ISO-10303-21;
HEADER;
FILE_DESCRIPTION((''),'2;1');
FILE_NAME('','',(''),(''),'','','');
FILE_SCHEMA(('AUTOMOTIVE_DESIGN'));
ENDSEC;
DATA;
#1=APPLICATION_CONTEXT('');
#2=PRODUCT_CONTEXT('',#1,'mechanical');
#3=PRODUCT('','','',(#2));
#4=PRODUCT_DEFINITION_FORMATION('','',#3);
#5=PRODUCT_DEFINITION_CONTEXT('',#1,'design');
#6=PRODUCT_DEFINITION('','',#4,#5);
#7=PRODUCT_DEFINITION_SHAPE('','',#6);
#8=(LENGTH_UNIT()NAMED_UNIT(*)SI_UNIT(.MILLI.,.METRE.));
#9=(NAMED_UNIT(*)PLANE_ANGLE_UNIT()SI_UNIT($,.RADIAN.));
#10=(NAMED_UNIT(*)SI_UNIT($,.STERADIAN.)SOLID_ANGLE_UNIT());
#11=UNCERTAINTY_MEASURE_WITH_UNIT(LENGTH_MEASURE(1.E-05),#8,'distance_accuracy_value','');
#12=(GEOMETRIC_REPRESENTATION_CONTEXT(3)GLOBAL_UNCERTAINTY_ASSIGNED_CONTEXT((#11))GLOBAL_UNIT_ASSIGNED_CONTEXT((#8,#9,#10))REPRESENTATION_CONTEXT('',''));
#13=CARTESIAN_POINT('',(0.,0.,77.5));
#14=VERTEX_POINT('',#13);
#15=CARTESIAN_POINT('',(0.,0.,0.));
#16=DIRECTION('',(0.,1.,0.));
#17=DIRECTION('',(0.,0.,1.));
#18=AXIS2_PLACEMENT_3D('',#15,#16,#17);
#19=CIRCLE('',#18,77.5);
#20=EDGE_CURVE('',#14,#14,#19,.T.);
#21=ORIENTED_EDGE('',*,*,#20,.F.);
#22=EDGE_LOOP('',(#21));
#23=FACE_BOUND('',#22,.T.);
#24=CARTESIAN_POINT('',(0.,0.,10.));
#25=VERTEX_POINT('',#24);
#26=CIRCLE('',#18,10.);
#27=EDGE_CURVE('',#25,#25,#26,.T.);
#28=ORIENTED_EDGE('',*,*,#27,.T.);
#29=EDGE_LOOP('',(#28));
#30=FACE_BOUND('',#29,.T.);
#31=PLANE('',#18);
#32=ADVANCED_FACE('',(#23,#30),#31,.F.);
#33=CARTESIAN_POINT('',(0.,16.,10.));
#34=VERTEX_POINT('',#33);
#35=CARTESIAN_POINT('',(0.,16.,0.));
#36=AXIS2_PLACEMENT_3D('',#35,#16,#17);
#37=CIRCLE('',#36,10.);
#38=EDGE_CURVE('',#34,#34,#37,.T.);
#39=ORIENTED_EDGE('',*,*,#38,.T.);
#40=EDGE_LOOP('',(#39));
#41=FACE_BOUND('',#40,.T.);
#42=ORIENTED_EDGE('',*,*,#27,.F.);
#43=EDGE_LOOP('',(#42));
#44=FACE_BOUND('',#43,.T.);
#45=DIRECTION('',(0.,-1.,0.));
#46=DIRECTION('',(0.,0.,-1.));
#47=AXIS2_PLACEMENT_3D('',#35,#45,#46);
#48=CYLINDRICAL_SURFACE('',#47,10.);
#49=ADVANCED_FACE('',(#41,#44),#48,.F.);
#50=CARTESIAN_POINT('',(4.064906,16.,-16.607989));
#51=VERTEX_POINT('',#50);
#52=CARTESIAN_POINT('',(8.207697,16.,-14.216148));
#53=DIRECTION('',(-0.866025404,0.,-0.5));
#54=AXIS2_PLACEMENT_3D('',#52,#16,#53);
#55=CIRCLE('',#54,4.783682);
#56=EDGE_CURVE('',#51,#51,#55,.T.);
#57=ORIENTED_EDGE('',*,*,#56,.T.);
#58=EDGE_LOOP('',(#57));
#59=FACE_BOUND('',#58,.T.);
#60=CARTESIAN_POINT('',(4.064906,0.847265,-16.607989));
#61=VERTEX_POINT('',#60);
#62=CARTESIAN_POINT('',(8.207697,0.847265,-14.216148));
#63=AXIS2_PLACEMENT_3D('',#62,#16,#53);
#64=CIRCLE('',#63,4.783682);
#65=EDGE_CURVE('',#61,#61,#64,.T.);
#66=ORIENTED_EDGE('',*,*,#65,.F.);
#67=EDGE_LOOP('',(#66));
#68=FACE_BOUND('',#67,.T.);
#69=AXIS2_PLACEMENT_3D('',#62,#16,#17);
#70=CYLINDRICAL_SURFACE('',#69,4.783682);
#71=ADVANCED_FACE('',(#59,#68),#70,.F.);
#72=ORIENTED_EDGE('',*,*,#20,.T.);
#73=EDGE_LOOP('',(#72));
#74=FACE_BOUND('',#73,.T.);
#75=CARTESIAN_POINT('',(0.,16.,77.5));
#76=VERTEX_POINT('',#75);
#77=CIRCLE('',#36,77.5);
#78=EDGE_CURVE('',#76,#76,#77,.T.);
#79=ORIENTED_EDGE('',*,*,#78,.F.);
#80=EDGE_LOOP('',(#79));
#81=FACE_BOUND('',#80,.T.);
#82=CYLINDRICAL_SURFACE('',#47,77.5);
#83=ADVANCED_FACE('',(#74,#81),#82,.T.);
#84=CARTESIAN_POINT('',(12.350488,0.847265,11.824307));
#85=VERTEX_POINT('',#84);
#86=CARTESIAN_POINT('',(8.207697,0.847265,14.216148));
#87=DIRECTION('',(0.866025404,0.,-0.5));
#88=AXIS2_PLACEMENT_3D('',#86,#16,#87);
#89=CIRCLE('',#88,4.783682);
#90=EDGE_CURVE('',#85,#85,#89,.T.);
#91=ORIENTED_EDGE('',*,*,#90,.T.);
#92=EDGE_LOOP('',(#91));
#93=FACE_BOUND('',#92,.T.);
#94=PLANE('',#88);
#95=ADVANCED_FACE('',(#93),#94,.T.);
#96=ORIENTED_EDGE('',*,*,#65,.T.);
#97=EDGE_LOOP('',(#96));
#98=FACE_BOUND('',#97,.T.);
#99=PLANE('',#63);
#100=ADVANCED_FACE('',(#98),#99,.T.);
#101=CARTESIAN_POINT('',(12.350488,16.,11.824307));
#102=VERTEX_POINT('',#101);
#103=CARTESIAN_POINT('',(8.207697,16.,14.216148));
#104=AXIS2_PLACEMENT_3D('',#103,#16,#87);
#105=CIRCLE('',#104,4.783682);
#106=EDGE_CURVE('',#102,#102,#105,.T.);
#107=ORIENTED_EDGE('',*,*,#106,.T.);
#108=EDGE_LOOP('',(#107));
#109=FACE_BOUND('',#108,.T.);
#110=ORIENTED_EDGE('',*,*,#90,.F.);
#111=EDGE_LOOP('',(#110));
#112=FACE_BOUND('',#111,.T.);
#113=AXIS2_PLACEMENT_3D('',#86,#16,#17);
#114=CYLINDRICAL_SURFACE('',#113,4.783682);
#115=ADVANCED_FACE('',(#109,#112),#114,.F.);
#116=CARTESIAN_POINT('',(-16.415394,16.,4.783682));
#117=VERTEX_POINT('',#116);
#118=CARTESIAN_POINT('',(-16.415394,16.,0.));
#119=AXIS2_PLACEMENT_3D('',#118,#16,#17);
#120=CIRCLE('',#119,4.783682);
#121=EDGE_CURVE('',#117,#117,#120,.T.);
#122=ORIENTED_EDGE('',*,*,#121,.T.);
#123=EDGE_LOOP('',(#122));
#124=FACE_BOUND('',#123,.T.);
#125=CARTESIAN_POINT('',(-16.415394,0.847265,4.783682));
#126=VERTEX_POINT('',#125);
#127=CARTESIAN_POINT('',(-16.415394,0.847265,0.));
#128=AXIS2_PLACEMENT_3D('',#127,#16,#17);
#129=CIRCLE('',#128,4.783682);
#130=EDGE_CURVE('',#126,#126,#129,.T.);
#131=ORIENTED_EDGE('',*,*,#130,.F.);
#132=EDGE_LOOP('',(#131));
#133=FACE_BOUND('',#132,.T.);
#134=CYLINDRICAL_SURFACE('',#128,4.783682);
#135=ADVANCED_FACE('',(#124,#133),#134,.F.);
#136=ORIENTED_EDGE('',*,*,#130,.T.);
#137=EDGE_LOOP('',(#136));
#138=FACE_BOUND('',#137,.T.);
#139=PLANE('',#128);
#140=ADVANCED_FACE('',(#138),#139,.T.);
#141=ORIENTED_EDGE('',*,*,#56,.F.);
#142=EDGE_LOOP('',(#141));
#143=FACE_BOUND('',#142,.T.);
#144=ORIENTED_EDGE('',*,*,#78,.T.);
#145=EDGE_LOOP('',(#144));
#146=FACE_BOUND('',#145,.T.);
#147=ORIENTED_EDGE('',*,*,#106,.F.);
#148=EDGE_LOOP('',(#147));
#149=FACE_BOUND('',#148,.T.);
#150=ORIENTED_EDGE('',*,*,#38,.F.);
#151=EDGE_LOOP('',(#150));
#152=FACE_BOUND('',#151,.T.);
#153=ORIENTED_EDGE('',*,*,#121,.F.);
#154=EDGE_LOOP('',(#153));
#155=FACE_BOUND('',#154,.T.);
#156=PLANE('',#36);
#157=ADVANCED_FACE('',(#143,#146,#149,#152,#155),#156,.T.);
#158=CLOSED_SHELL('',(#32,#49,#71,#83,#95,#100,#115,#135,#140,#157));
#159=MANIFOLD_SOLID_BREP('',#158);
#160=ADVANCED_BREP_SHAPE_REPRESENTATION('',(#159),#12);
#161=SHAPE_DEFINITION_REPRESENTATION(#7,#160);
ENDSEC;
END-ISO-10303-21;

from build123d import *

# Parameters (mm, degrees)
SKETCH1_R           = 77.5
BOSS_EXTRUDE1_DEPTH = 16
SKETCH2_R           = 10
CUT_EXTRUDE1_DEPTH  = 111.763261057
SKETCH3_R           = 4.783682476
CUT_EXTRUDE2_DEPTH  = 15.152735102
CIRPATTERN1_COUNT   = 3


with BuildPart() as part:
    # Sketch1 → Boss-Extrude1 (new body)
    with BuildSketch(Plane(origin=(0, 0, 0), x_dir=(1, 0, 0), z_dir=(0, 1, 0))):
        Circle(SKETCH1_R)
    extrude(amount=BOSS_EXTRUDE1_DEPTH)

    # Sketch2 → Cut-Extrude1 (cut, through all)
    with BuildSketch(Plane(origin=(0, 0, 0), x_dir=(1, 0, 0), z_dir=(0, 1, 0))):
        Circle(SKETCH2_R)
    extrude(amount=CUT_EXTRUDE1_DEPTH, mode=Mode.SUBTRACT)

    # Sketch3 → Cut-Extrude2 (cut)
    with BuildSketch(Plane(origin=(0, 16, 0), x_dir=(1, 0, 0), z_dir=(0, 1, 0))):
        with Locations((-16.415394018, 0)):
            Circle(SKETCH3_R)
    cut_extrude2 = extrude(amount=-CUT_EXTRUDE2_DEPTH, mode=Mode.SUBTRACT)

    # CirPattern1: Cut-Extrude2 ×3 about axis
    cirpattern1_axis = Axis((0, 0, 0), (0, 1, 0))
    for i in range(1, CIRPATTERN1_COUNT):
        add(cut_extrude2.rotate(cirpattern1_axis, i * 360 / CIRPATTERN1_COUNT), mode=Mode.SUBTRACT)


solid = part.part
